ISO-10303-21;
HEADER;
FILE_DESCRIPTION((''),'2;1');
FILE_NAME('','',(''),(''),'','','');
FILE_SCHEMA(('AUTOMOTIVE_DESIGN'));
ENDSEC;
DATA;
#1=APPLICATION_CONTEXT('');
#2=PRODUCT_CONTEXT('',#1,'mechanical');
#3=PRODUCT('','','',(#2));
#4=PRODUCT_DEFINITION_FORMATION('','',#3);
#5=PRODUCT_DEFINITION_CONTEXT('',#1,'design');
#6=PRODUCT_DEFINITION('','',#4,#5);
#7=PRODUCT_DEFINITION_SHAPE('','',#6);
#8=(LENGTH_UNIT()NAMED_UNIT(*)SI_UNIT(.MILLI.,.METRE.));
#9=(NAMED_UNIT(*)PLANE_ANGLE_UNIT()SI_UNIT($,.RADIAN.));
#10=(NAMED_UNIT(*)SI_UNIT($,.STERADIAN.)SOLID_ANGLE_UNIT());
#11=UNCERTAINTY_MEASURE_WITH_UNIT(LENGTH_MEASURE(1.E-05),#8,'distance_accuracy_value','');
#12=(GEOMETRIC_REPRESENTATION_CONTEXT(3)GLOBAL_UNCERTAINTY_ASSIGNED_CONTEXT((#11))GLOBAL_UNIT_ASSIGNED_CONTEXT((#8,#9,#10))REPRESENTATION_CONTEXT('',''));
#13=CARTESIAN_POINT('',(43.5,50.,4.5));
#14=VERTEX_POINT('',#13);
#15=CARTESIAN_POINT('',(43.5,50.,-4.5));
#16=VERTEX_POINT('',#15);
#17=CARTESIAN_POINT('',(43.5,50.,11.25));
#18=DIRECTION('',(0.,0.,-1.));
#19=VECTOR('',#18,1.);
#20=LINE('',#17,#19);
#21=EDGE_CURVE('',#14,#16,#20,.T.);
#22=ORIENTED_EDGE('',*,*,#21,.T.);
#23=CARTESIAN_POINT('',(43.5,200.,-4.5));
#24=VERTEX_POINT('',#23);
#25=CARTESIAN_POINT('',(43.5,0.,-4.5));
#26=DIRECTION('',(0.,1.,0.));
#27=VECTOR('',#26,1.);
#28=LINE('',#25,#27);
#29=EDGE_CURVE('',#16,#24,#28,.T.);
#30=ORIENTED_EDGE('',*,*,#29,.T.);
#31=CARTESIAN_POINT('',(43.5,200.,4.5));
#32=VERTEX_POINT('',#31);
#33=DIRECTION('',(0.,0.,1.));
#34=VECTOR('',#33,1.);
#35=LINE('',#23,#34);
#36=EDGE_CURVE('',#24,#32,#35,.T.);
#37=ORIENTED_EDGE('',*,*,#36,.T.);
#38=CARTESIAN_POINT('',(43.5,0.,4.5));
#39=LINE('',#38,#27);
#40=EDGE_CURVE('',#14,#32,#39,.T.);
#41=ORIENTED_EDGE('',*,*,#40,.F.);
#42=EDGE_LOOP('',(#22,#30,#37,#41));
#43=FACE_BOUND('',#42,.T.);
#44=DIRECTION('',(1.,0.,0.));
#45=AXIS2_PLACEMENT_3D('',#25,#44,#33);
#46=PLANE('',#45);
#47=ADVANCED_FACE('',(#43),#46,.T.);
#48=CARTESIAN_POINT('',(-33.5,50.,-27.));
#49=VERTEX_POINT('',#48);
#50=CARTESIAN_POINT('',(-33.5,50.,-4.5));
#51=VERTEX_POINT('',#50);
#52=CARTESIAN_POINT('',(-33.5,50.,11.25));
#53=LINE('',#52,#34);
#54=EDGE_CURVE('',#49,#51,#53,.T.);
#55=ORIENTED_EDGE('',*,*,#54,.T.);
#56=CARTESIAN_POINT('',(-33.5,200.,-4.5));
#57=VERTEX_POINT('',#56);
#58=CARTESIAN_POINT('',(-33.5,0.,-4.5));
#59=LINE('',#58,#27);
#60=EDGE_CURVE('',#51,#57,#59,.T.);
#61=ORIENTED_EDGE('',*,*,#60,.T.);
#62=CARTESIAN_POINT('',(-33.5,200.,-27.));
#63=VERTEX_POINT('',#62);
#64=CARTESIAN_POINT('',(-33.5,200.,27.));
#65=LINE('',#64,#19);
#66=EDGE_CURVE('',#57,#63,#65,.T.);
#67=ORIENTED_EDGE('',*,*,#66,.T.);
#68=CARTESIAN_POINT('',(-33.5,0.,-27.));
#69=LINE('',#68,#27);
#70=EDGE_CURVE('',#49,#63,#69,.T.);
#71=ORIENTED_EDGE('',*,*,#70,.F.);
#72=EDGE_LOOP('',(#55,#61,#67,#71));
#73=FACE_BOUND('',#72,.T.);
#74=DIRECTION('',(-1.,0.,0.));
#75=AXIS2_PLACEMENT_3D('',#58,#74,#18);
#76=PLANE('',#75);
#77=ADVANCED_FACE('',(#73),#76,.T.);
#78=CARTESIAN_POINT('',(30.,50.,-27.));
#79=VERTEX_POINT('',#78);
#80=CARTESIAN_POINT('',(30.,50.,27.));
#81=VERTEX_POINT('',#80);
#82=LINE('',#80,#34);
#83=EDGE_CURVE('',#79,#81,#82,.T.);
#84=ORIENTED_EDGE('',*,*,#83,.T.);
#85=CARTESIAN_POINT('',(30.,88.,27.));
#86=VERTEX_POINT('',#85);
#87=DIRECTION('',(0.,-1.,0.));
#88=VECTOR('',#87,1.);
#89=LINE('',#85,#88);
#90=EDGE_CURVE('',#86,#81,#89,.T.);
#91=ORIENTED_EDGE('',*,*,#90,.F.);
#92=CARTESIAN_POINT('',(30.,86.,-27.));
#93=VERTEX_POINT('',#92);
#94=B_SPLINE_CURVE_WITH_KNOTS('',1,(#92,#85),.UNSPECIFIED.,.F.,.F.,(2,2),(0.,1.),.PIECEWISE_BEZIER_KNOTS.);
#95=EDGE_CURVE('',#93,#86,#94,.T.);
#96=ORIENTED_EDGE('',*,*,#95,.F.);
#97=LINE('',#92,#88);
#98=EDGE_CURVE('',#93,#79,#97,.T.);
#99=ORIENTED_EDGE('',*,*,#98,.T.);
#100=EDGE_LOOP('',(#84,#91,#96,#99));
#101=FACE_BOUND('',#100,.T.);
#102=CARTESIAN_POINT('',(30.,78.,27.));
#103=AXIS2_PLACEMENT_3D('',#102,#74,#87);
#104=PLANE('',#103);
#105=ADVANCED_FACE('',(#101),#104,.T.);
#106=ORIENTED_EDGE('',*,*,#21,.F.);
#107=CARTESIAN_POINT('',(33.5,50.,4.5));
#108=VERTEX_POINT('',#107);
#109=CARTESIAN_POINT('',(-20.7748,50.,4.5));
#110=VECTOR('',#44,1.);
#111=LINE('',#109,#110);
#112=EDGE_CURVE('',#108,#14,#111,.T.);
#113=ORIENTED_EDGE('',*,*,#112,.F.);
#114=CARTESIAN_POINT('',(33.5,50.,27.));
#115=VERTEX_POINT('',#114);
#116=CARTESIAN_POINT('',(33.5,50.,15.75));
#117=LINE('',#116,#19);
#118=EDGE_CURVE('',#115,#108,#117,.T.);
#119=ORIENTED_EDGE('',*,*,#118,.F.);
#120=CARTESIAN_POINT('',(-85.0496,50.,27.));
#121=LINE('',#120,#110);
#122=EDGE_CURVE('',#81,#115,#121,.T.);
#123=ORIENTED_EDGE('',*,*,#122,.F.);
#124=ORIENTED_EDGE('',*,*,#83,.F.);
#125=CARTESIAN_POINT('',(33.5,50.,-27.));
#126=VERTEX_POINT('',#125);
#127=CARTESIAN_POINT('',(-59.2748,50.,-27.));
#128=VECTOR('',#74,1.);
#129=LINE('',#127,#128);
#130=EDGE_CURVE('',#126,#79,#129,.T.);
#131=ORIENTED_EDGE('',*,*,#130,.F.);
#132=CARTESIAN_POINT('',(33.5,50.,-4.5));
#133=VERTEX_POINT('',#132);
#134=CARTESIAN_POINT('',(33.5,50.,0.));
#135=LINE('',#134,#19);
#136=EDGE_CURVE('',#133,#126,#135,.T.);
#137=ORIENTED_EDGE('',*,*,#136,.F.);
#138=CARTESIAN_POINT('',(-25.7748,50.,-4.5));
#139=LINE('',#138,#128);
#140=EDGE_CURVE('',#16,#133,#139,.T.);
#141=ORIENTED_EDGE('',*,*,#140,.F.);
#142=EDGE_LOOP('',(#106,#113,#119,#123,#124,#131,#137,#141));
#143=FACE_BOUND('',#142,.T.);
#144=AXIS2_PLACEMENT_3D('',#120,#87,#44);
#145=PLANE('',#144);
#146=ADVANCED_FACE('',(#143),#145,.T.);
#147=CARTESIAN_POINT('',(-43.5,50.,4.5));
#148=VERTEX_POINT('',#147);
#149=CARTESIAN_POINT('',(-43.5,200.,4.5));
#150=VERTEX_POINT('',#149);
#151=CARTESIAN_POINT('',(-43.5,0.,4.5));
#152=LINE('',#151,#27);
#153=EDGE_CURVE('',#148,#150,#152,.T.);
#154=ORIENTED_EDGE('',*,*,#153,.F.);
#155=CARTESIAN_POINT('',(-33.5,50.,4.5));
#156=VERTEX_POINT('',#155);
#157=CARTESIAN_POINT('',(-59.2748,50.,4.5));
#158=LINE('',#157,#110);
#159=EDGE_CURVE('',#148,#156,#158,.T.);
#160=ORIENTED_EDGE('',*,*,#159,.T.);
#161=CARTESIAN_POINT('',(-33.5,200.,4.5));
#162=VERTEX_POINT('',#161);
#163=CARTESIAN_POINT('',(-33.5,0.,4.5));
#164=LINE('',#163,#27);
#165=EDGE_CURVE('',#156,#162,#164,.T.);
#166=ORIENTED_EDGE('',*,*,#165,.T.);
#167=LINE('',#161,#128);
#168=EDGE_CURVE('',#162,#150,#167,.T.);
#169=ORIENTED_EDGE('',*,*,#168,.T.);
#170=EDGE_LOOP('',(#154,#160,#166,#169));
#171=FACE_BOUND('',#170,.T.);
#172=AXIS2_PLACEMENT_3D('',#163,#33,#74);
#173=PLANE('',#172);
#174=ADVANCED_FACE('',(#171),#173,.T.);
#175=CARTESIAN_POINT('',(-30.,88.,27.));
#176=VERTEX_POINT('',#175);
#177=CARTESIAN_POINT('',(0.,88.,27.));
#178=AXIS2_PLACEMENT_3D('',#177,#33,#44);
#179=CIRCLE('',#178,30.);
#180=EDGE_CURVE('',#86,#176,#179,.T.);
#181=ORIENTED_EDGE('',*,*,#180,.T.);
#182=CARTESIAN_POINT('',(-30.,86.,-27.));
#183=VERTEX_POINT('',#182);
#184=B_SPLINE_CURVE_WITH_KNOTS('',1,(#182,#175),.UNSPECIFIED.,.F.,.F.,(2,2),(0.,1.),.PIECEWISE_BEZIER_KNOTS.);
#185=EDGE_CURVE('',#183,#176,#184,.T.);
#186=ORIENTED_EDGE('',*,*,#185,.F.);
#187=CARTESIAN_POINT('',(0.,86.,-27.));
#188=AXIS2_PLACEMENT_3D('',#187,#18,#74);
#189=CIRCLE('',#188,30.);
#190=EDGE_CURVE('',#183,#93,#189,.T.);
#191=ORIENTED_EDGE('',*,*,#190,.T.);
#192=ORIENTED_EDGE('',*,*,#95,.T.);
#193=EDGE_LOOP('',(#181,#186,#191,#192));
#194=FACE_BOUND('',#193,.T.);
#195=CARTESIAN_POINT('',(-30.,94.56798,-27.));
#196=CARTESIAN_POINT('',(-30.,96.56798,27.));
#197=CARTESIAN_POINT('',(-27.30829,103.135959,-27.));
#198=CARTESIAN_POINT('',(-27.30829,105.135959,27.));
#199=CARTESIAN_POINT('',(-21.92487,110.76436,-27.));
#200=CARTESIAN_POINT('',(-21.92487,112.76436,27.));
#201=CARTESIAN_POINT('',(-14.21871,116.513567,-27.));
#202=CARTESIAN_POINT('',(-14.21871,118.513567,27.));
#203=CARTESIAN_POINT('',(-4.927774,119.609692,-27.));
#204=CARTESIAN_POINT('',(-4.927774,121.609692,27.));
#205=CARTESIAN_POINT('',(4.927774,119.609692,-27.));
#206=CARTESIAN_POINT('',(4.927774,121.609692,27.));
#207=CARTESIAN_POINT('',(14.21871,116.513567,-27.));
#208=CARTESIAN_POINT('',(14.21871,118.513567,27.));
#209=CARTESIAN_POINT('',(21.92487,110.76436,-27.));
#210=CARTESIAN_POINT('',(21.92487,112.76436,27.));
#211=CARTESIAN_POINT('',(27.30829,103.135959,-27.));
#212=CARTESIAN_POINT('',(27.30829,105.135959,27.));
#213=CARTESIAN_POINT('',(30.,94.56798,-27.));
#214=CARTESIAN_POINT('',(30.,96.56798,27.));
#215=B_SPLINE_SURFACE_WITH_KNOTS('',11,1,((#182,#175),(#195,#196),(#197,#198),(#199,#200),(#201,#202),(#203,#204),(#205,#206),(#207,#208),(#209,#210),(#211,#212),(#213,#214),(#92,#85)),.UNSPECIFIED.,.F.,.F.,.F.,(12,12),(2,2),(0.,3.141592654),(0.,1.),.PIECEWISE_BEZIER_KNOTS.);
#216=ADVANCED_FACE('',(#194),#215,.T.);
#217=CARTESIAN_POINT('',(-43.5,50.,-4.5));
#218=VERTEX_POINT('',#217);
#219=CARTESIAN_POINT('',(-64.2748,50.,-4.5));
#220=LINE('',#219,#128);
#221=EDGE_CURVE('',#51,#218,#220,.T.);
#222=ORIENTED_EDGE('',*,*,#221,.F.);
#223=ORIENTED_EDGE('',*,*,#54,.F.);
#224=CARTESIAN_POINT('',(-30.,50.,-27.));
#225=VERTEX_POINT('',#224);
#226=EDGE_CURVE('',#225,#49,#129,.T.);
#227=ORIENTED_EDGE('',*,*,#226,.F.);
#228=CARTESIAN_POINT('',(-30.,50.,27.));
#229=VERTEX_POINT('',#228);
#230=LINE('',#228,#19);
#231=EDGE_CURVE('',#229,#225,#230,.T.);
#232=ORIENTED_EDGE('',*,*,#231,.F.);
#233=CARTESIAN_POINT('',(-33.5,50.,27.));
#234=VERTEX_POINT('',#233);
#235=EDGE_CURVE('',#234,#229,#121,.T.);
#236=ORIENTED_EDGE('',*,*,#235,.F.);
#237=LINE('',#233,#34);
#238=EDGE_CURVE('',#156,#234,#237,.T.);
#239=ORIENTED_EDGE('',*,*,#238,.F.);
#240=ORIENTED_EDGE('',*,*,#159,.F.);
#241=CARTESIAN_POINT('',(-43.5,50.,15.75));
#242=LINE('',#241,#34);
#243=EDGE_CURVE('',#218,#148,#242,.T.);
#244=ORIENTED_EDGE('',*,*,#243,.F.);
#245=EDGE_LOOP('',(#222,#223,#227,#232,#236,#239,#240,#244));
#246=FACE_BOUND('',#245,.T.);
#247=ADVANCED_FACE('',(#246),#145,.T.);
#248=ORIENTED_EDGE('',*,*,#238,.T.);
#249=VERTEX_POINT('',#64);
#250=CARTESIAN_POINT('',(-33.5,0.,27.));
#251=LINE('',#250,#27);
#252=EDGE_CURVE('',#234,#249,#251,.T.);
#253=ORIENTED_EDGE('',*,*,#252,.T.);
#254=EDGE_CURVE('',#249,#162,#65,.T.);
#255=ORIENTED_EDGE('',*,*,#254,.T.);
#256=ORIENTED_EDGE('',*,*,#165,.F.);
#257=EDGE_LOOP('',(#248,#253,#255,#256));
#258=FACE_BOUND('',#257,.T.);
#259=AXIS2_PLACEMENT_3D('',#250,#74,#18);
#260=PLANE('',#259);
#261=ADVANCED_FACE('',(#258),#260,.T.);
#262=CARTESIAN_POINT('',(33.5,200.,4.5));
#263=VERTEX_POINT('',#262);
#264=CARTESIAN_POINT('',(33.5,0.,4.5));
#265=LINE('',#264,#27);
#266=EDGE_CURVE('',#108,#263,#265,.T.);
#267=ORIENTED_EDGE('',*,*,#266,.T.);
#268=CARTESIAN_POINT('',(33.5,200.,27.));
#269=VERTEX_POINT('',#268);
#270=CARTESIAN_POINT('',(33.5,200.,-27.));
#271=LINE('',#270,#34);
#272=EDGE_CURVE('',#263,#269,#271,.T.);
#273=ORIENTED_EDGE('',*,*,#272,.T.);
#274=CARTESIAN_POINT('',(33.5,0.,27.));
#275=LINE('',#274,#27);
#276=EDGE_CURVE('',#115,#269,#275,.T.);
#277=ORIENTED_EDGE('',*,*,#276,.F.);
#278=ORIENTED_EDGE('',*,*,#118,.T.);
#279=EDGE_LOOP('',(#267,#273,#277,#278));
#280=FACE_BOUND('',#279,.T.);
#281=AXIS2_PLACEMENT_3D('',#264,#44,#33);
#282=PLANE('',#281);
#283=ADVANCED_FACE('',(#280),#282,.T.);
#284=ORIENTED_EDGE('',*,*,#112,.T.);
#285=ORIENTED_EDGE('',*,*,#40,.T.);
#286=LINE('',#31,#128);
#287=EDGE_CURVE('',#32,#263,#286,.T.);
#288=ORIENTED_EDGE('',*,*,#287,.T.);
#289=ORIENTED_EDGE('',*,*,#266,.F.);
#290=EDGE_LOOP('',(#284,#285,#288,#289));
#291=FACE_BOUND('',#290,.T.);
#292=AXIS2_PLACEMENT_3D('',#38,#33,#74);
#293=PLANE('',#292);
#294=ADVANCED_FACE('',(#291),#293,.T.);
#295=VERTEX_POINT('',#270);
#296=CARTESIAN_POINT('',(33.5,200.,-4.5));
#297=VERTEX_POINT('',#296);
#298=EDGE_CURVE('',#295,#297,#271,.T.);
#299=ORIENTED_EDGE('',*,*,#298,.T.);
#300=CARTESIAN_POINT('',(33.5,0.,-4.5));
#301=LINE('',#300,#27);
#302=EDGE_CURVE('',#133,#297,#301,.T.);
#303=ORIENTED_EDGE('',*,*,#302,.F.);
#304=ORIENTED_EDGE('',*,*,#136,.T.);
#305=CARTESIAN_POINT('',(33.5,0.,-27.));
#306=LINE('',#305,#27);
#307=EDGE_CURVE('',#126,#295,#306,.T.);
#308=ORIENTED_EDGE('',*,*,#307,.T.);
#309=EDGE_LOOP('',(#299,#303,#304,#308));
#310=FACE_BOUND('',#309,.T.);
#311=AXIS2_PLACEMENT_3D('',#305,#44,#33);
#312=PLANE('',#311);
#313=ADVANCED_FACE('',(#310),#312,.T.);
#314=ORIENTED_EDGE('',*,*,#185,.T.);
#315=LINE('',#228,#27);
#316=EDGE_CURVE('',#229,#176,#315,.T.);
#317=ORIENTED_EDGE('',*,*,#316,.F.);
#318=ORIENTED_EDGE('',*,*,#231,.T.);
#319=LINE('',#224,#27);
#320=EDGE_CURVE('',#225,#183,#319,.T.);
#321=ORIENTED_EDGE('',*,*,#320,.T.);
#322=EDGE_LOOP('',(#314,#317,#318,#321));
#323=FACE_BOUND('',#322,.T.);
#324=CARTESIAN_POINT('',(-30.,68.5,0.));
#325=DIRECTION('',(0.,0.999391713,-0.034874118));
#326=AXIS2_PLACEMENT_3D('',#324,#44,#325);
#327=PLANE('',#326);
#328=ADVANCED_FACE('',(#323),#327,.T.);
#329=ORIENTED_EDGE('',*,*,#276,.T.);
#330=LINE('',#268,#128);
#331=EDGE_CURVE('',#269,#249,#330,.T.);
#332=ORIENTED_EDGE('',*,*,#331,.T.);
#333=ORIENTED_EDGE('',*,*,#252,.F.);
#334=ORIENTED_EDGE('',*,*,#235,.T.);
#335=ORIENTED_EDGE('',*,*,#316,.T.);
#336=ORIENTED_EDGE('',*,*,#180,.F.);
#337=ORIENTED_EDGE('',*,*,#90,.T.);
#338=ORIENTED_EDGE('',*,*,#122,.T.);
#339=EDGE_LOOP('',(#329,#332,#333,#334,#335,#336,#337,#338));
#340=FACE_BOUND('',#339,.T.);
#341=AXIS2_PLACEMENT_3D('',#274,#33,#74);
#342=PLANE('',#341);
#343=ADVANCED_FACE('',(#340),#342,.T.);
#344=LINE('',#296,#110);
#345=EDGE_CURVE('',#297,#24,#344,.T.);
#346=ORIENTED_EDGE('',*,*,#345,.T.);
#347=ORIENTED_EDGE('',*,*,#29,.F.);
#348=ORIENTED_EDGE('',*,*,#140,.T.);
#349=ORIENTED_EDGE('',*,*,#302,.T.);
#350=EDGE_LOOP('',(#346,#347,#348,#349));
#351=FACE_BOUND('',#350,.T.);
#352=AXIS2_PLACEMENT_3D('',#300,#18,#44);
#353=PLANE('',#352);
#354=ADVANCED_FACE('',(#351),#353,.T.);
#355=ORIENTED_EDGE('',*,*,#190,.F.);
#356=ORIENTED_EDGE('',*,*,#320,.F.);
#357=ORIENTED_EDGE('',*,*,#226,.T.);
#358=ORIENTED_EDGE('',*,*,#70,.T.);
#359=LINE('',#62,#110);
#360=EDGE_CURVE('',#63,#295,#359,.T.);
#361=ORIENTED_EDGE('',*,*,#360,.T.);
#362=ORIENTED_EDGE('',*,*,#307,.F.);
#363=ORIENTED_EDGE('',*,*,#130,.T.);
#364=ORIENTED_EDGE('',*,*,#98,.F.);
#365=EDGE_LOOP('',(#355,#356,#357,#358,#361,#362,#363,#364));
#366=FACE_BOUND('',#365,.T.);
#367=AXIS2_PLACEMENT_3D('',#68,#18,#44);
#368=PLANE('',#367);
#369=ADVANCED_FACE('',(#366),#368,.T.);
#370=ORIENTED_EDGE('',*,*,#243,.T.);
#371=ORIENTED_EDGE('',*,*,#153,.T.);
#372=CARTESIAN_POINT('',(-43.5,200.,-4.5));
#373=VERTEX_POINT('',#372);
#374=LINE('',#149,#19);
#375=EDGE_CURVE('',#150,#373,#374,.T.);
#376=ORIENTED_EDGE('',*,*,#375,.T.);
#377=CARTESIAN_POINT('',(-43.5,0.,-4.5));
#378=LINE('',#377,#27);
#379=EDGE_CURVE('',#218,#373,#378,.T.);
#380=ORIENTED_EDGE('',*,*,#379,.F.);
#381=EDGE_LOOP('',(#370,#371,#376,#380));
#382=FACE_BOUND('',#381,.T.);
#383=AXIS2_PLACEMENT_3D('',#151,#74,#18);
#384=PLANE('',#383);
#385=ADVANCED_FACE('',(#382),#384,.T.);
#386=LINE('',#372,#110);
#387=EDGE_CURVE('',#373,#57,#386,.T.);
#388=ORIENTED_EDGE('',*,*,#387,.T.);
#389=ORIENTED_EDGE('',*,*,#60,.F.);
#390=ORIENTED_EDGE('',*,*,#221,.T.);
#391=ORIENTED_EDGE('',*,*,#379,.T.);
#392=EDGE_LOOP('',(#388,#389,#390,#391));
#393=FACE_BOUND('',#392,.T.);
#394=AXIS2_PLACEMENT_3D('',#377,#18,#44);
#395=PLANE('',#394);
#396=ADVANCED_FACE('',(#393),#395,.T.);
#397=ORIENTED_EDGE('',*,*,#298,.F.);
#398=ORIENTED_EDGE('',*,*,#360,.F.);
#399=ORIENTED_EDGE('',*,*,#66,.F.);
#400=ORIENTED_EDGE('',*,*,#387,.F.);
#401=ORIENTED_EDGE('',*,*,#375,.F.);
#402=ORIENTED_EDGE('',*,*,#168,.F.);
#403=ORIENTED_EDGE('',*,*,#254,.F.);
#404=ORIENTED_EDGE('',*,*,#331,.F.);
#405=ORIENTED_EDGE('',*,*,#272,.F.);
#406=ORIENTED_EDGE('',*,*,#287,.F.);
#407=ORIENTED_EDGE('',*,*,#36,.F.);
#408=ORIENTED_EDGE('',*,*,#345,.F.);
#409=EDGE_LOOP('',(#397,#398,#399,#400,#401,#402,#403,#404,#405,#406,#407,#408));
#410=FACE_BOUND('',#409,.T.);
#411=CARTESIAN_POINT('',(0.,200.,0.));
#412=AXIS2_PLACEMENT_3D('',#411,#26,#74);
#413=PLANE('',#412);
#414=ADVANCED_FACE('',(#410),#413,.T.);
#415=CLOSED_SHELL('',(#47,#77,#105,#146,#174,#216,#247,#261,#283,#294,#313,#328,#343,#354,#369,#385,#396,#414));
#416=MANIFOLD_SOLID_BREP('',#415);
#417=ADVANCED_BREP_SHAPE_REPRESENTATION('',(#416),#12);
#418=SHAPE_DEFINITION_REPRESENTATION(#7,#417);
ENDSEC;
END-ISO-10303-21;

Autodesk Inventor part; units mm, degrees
ref_plane "YZ Plane" through (0, 0, 0) normal (1, 0, 0) x (0, 1, 0)
ref_plane "XZ Plane" through (0, 0, 0) normal (0, 1, 0) x (-1, 0, 0)
ref_plane "XY Plane" through (0, 0, 0) normal (0, 0, 1) x (1, 0, 0)
sketch "草圖1" plane through (0, 0, 0) normal (0, 1, 0) x (-1, 0, 0)
  line L0 (-33.5, 27) -> (33.5, 27)
  line L1 (33.5, 27) -> (33.5, -27)
  line L2 (33.5, -27) -> (-33.5, -27)
  line L3 (-33.5, -27) -> (-33.5, 27)
  line L4 (-33.5, 27) -> (33.5, -27) construction
  line L5 (33.5, 27) -> (-33.5, -27) construction
  line L6 (43.5, -4.5) -> (33.5, -4.5)
  line L7 (33.5, -4.5) -> (33.5, 4.5)
  line L8 (33.5, 4.5) -> (43.5, 4.5)
  line L9 (43.5, 4.5) -> (43.5, -4.5)
  line L10 (-33.5, -4.5) -> (-43.5, -4.5)
  line L11 (-43.5, -4.5) -> (-43.5, 4.5)
  line L12 (-43.5, 4.5) -> (-33.5, 4.5)
  line L13 (-33.5, 4.5) -> (-33.5, -4.5)
  point P0 (0, 0)
  point P1 (33.5, 0)
  point P2 (-33.5, 0)
  point P3 (-33.5, 4.5)
  point P4 (-33.5, -4.5)
  dimension "d0" = 67
  dimension "d1" = 54
  dimension "d2" = 9
  dimension "d3" = 10
extrude "擠出1" add sketch "草圖1" along normal blind 200
sketch "草圖2" plane through (-33.5, 0, 27) normal (0, 0, 1) x (1, 0, 0)
  circle A0 centre (33.5, 78) radius 30
  line L0 (0, 0) -> (67, 0) projected
  line L1 (3.5, 78) -> (63.5, 78)
  line L2 (63.5, 78) -> (63.5, -10.8713)
  line L3 (63.5, -10.8713) -> (3.5, -10.8713)
  line L4 (3.5, -10.8713) -> (3.5, 78)
  point P0 (33.5, 0)
  point P1 (33.5, 0)
  point P2 (63.5, 78)
  dimension "d6" = 78
  dimension "d7" = 60
extrude "擠出2" cut sketch "草圖2" against normal through all
sketch "草圖3" plane through (-33.5, 200, 27) normal (0, 0, 1) x (1, 0, 0)
  line L0 (-51.5496, -150) -> (118.5496, -150)
  line L1 (118.5496, -150) -> (118.5496, -200)
  line L2 (118.5496, -200) -> (-51.5496, -200)
  line L3 (-51.5496, -200) -> (-51.5496, -150)
  point P0 (33.5, -200)
  point P1 (33.5, -200)
  dimension "d10" = 50
extrude "擠出3" cut sketch "草圖3" against normal through all
sketch "草圖4" plane through (33.5, 200, -27) normal (0, 0, -1) x (-1, 0, 0)
  arc A0 (63.5, -122) -> (3.5, -122) centre (33.5, -122) ccw construction
  circle A1 centre (33.5, -114) radius 30
  line L0 (63.5, -150) -> (3.5, -150)
  line L1 (3.5, -150) -> (3.5, -114)
  line L2 (3.5, -114) -> (63.5, -114)
  line L3 (63.5, -114) -> (63.5, -150)
  point P0 (33.5, -200)
  point P1 (63.5, -150)
  dimension "d13" = 8
  dimension "d14" = 60
sketch "草圖5" plane through (-33.5, 200, 27) normal (0, 0, 1) x (1, 0, 0)
  arc A0 (63.5, -122) -> (3.5, -122) centre (33.5, -122) ccw construction
  circle A1 centre (33.5, -112) radius 30
  line L0 (63.5, -150) -> (3.5, -150)
  line L1 (3.5, -150) -> (3.5, -112)
  line L2 (3.5, -112) -> (63.5, -112)
  line L3 (63.5, -112) -> (63.5, -150)
  point P0 (33.5, -200)
  point P1 (63.5, -150)
  dimension "d15" = 10
  dimension "d16" = 60
loft "斷面混成1" cut profiles "草圖4", "草圖5"
properties part number "Slider-3"
